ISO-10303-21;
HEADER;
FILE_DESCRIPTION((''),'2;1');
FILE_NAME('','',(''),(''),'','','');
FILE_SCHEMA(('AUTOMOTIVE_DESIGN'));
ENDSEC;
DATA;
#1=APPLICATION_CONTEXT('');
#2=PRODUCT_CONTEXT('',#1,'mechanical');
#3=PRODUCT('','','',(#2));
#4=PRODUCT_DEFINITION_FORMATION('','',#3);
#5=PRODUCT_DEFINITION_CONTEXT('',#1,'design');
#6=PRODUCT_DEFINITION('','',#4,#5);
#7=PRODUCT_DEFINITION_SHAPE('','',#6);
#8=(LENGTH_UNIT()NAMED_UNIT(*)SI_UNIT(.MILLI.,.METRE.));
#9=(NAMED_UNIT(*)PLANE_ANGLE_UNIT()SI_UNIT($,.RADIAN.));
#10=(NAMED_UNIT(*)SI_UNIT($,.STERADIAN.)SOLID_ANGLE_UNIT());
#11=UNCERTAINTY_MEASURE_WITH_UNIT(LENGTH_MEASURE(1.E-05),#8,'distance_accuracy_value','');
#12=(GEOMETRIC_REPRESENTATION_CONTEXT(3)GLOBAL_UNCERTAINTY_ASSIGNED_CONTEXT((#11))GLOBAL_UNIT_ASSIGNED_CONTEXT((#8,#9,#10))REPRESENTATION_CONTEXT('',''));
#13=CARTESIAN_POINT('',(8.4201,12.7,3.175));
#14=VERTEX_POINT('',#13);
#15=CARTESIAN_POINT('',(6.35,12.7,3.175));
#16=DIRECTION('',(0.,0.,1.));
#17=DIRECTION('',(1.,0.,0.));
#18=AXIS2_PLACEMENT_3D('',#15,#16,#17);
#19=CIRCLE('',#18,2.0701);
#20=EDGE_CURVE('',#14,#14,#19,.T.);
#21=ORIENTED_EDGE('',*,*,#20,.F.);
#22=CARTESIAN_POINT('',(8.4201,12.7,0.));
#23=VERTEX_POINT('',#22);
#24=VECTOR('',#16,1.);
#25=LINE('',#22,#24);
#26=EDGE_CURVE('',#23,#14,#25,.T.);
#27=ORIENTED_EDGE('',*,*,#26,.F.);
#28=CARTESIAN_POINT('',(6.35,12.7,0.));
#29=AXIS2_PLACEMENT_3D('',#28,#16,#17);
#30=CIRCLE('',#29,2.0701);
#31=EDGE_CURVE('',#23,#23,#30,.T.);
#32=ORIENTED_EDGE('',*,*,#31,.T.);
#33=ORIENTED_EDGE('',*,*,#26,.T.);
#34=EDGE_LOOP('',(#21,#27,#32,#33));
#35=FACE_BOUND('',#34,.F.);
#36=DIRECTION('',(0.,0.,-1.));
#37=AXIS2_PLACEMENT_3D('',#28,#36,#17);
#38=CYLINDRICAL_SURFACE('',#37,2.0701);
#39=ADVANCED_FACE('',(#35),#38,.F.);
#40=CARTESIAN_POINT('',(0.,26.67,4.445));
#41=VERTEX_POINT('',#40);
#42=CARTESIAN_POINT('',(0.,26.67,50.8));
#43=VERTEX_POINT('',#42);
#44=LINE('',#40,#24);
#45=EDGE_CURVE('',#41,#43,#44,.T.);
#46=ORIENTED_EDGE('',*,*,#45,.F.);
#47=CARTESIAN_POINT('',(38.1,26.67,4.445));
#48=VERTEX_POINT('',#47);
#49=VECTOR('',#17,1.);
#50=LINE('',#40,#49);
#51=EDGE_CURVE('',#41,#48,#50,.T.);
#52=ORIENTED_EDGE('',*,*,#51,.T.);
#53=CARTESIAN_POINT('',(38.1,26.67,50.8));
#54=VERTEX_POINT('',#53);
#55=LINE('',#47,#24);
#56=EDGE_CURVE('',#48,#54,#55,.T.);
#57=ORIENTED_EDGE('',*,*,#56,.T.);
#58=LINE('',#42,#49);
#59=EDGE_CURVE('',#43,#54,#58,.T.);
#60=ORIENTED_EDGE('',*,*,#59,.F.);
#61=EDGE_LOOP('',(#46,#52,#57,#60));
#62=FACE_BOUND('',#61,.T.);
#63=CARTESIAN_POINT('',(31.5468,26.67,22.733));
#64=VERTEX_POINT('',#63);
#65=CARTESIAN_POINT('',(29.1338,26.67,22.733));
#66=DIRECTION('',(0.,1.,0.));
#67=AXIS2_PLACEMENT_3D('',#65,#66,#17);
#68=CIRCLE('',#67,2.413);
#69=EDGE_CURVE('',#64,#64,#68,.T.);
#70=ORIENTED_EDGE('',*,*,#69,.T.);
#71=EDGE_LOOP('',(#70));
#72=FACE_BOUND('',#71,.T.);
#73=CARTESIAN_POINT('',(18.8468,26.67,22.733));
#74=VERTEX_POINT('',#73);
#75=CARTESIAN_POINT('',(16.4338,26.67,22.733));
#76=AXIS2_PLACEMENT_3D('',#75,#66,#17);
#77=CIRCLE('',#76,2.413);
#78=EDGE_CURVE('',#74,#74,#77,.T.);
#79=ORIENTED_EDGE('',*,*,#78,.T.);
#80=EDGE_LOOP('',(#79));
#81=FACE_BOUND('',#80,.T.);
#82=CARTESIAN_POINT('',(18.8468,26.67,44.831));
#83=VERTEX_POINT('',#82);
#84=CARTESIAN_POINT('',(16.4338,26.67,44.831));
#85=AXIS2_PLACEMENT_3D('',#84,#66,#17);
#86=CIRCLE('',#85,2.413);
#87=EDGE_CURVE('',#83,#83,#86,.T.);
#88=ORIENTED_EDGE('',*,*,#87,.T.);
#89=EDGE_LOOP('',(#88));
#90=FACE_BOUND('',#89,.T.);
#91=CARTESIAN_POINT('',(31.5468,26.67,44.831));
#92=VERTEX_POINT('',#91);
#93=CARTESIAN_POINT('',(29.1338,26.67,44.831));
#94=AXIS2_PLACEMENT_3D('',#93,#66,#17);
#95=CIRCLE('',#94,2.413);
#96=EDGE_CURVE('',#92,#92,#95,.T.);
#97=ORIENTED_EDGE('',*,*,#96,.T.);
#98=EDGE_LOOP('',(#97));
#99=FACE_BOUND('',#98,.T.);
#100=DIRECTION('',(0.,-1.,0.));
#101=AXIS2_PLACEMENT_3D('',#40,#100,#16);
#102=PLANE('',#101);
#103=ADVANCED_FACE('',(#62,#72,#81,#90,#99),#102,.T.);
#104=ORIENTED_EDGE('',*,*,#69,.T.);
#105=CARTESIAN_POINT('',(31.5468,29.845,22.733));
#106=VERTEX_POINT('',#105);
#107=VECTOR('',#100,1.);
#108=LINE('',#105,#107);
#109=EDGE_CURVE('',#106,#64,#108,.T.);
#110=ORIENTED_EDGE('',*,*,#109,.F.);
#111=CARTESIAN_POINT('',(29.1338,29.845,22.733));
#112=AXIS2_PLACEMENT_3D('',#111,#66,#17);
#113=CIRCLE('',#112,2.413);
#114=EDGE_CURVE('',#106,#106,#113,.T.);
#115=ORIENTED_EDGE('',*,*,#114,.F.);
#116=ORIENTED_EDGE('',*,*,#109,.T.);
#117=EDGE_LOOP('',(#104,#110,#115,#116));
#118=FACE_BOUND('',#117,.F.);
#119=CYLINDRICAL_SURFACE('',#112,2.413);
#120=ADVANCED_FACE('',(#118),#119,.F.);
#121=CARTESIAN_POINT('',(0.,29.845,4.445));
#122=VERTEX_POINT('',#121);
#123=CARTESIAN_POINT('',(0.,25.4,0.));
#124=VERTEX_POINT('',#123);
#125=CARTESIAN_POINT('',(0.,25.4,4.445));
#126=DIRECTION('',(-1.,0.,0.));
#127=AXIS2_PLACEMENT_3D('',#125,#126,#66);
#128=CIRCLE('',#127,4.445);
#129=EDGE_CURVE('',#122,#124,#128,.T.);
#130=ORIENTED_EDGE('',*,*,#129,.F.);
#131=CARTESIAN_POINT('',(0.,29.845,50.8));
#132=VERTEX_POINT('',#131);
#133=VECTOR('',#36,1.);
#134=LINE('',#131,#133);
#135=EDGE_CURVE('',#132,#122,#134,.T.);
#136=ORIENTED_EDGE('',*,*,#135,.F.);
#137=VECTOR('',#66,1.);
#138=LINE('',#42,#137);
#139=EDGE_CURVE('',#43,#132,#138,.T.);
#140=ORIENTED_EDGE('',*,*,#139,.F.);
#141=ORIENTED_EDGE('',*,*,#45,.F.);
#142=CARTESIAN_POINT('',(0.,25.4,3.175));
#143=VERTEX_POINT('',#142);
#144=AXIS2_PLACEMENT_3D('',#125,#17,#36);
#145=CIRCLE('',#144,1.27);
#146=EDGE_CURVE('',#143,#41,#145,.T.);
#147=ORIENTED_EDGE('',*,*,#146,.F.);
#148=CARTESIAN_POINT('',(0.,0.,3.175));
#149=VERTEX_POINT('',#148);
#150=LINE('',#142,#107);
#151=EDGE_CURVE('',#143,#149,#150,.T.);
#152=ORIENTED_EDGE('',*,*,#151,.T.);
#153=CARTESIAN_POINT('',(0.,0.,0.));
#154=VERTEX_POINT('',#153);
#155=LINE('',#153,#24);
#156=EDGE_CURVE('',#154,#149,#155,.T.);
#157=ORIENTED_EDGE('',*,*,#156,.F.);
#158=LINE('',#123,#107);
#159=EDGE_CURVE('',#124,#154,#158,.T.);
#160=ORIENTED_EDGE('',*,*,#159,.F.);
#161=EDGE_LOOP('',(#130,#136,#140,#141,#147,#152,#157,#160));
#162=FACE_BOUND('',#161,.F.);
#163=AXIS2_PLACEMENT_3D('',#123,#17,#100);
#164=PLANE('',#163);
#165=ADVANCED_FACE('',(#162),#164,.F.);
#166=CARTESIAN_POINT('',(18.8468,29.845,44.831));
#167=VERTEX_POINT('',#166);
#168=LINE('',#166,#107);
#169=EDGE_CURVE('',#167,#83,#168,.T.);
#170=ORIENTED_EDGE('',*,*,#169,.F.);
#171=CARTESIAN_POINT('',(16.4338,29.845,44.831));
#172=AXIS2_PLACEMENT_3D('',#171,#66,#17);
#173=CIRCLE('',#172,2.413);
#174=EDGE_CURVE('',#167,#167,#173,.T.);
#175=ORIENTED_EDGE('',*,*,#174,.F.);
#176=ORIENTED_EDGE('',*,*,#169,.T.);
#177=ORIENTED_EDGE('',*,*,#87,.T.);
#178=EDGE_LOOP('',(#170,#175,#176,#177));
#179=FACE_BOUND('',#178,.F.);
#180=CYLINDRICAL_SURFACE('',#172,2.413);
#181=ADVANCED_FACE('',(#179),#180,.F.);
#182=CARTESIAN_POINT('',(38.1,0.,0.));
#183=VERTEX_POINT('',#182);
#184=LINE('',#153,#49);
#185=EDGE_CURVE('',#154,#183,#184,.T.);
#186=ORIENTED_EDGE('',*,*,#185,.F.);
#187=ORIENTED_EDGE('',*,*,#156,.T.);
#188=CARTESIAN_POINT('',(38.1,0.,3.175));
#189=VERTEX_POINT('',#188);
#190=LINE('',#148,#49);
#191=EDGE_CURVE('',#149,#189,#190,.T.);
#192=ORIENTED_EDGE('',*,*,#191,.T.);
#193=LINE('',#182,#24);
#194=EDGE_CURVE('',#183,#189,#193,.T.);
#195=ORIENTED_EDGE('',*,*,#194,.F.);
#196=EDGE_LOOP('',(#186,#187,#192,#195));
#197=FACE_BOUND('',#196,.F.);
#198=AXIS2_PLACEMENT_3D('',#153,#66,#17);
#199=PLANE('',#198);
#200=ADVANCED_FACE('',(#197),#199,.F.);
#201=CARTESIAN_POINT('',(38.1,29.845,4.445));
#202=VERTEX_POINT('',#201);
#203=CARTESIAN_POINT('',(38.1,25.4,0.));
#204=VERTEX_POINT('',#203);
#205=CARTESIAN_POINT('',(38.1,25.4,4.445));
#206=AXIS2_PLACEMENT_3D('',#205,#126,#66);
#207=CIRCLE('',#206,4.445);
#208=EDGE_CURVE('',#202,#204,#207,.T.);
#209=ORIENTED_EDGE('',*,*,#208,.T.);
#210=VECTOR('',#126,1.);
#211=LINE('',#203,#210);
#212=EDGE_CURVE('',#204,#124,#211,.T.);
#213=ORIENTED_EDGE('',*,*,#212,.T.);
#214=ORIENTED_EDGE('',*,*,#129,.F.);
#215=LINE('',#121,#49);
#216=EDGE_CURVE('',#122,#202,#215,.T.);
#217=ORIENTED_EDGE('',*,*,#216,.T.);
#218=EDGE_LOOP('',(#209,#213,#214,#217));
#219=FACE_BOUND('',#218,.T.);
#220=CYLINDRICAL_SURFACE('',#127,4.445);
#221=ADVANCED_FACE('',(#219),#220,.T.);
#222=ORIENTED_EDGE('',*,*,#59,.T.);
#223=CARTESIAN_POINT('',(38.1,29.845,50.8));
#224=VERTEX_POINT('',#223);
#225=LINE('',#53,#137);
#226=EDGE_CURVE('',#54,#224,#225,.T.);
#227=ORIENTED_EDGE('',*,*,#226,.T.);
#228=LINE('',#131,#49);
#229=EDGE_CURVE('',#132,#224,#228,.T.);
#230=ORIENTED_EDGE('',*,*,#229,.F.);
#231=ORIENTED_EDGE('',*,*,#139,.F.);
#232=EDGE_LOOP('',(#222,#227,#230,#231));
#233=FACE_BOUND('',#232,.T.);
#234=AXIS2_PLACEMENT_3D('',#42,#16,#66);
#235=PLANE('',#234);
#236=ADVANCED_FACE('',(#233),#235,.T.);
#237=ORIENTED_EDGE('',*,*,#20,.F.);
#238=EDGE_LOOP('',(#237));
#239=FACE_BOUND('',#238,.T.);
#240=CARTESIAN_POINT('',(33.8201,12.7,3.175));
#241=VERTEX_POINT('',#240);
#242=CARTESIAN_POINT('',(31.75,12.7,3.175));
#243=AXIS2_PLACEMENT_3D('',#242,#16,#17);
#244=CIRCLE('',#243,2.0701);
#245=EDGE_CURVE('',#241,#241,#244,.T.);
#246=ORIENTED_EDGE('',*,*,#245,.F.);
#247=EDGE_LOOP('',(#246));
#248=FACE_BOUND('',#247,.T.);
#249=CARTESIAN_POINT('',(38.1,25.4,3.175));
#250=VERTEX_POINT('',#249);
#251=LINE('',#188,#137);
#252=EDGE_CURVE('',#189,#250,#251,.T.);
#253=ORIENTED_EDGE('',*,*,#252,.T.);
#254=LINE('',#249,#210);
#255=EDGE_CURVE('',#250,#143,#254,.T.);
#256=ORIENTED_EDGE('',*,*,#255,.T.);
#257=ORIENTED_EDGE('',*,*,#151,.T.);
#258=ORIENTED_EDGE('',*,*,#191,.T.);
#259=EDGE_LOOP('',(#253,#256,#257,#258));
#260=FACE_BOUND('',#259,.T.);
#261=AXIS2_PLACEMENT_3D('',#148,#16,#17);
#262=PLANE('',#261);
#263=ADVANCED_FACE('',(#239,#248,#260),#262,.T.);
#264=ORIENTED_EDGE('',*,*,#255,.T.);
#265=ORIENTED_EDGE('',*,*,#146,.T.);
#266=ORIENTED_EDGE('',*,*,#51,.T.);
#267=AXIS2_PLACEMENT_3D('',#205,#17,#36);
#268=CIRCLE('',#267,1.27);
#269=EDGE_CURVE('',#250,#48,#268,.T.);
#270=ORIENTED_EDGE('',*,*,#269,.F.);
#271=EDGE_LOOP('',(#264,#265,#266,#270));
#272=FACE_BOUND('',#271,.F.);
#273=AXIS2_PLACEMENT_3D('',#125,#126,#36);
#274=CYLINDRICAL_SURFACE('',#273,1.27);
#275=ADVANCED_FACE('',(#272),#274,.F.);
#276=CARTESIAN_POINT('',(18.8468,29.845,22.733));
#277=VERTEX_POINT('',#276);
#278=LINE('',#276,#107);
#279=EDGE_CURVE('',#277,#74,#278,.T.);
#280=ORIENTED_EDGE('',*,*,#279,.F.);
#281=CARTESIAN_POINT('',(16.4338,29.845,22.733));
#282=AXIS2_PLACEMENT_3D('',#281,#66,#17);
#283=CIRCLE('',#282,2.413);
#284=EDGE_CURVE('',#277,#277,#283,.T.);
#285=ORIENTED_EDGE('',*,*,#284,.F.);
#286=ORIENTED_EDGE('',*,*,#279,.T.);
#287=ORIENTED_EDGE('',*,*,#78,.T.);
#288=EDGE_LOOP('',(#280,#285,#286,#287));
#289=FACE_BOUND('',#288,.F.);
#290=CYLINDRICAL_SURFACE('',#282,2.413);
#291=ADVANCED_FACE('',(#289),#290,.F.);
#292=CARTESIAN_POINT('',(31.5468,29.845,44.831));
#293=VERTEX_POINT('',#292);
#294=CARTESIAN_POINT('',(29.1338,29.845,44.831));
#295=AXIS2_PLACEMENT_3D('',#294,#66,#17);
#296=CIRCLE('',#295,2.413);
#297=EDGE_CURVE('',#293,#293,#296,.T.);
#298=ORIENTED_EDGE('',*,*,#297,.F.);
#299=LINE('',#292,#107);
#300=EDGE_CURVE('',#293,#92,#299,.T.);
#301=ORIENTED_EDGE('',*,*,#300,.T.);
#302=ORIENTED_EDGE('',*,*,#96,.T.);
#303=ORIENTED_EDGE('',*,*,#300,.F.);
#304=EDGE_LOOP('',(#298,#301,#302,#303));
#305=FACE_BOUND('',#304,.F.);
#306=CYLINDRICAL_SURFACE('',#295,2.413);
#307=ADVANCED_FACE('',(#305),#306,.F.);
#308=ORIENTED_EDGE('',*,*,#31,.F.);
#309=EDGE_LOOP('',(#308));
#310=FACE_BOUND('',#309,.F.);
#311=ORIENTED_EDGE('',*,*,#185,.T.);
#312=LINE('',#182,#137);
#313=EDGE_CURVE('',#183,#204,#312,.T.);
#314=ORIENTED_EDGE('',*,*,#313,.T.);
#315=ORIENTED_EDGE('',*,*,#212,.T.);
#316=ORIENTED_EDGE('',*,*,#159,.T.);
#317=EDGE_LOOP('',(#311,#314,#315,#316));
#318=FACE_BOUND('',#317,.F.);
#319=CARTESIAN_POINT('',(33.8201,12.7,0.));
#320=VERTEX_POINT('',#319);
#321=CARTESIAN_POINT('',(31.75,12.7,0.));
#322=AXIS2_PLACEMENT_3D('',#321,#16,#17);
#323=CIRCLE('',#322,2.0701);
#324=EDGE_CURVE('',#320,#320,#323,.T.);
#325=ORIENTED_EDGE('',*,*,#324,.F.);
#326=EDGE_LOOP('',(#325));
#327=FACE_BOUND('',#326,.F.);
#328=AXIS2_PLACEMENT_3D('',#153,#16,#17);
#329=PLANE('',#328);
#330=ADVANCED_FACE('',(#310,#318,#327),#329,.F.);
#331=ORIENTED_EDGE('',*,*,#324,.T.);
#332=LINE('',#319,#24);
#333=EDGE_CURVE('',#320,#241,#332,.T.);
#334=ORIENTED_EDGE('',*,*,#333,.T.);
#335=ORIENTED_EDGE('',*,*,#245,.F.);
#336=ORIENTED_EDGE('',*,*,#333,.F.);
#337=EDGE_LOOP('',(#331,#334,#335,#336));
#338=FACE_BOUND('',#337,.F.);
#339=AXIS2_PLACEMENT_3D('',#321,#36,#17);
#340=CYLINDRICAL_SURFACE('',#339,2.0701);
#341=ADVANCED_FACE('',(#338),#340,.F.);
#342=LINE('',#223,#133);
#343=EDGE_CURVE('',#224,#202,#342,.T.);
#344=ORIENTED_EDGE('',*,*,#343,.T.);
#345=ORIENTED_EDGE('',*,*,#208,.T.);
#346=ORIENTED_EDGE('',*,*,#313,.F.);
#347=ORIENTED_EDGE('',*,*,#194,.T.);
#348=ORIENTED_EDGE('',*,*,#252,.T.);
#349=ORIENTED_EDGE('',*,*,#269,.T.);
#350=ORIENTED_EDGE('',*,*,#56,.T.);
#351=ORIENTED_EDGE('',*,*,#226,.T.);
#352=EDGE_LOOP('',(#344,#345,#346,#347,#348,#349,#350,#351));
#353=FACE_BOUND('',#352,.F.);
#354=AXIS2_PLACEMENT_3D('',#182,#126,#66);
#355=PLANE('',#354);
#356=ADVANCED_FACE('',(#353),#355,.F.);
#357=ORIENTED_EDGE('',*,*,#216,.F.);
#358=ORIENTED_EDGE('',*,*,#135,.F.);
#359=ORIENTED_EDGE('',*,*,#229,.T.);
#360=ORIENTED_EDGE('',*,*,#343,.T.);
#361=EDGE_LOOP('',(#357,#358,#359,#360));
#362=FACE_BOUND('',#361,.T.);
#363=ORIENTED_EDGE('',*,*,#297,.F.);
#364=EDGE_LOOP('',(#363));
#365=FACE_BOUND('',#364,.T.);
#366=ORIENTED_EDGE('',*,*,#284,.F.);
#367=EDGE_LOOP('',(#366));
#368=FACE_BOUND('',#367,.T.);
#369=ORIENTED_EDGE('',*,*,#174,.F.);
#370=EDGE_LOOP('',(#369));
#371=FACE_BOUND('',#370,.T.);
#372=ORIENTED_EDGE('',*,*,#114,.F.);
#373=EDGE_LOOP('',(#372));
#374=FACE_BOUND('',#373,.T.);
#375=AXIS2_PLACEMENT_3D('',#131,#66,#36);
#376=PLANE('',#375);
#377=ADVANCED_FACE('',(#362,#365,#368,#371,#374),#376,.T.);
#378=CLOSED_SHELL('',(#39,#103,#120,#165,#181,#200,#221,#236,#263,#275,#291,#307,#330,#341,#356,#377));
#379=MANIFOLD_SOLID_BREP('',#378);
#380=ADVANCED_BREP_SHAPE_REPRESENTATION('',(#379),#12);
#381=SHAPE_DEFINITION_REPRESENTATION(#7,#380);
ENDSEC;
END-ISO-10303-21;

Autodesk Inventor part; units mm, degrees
ref_plane "YZ Plane" through (0, 0, 0) normal (1, 0, 0) x (0, 1, 0)
ref_plane "XZ Plane" through (0, 0, 0) normal (0, 1, 0) x (-1, 0, 0)
ref_plane "XY Plane" through (0, 0, 0) normal (0, 0, 1) x (1, 0, 0)
sketch "Sketch1" plane through (0, 0, 0) normal (0, 0, 1) x (1, 0, 0)
  line L0 (0, 0) -> (38.1, 0)
  line L1 (38.1, 0) -> (38.1, 25.4)
  line L2 (38.1, 25.4) -> (0, 25.4)
  line L3 (0, 25.4) -> (0, 0)
  circle A0 centre (6.35, 12.7) radius 2.0701
  circle A1 centre (31.75, 12.7) radius 2.0701
  dimension "d0" = 38.1
  dimension "d1" = 25.4
  dimension "d2" = 4.1402
  dimension "d3" = 12.7
  dimension "d4" = 6.35
  dimension "d7" = 25.4
extrude "Plate1" add sketch "Sketch1" along normal blind 3.175
sketch "Sketch2" plane through (0, 26.67, 4.445) normal (0, 1, 0) x (-1, 0, 0)
  line L0 (-38.1, 0) -> (0, 0)
  line L1 (0, 0) -> (0, 46.355)
  line L2 (0, 46.355) -> (-38.1, 46.355)
  line L3 (-38.1, 46.355) -> (-38.1, 0)
edge flange "Flange1" height 50.8 angle 90 thickness 3.175 bend radius 1.27 thickness toward (0, 1, 0) relief tear relief width 3.175 relief depth 1.5875 edges at (19.05, 25.4, 3.175) wall of the first edge with corners at (38.1, 26.67, 4.445) (0, 26.67, 4.445) (0, 26.67, 50.8) (38.1, 26.67, 50.8)
bend "Bend1"
corner "Corner1"
sketch "Sketch3" plane through (0, 29.845, 50.8) normal (0, 1, 0) x (1, 0, 0)
  line L0 (38.1, 46.355) -> (0, 46.355) projected
  line L1 (32.3088, 33.655) -> (13.2588, 33.655) construction
  line L2 (13.2588, 33.655) -> (13.2588, 0.381) construction
  line L3 (13.2588, 0.381) -> (32.3088, 0.381) construction
  line L4 (32.3088, 0.381) -> (32.3088, 33.655) construction
  line L5 (32.3088, 5.969) -> (13.2588, 5.969) construction
  circle A0 centre (29.1338, 5.969) radius 2.413
  line L6 (22.7838, 0.381) -> (22.7838, 33.655) construction
  circle A1 centre (16.4338, 5.969) radius 2.413
  line L7 (32.3088, 17.018) -> (13.2588, 17.018) construction
  circle A2 centre (29.1338, 28.067) radius 2.413
  circle A3 centre (16.4338, 28.067) radius 2.413
  line L8 (0, 0) -> (0, 46.355) projected
  point P0 (0, 50.8)
  dimension "d23" = 19.05
  dimension "d24" = 33.274
  dimension "d25" = 5.588
  dimension "d26" = 3.175
  dimension "d27" = 4.826
  dimension "d29" = 12.7
  dimension "d32" = 13.2588
extrude "Cut1" cut sketch "Sketch3" against normal blind 3.175
equation "\"d30\" = Thickness"
equation "\"d13\" = BendReliefWidth"
equation "\"d14\" = BendReliefDepth"
equation "\"d15\" = MinimumRemnant"
equation "\"d16\" = BendRadius"
equation "\"d20\" = CornerReliefSize"
equation "\"d21\" = GapSize"
equation "\"d22\" = JacobiRadiusSize"
equation "\"BendRadius\" = Thickness"
equation "\"BendReliefWidth\" = Thickness"
equation "\"BendReliefDepth\" = 0.5 * Thickness"
equation "\"CornerReliefSize\" = 4 * Thickness"
equation "\"MinimumRemnant\" = 2 * Thickness"
equation "\"TransitionRadius\" = BendRadius"
equation "\"JacobiRadiusSize\" = BendRadius"
equation "\"GapSize\" = Thickness"
equation "\"d12\" = BendRadius"
equation "\"Thickness\" = 3.175"
properties part number "Pneumatic Piston Back Flange (Left Custom)" material "Aluminum 6061"
